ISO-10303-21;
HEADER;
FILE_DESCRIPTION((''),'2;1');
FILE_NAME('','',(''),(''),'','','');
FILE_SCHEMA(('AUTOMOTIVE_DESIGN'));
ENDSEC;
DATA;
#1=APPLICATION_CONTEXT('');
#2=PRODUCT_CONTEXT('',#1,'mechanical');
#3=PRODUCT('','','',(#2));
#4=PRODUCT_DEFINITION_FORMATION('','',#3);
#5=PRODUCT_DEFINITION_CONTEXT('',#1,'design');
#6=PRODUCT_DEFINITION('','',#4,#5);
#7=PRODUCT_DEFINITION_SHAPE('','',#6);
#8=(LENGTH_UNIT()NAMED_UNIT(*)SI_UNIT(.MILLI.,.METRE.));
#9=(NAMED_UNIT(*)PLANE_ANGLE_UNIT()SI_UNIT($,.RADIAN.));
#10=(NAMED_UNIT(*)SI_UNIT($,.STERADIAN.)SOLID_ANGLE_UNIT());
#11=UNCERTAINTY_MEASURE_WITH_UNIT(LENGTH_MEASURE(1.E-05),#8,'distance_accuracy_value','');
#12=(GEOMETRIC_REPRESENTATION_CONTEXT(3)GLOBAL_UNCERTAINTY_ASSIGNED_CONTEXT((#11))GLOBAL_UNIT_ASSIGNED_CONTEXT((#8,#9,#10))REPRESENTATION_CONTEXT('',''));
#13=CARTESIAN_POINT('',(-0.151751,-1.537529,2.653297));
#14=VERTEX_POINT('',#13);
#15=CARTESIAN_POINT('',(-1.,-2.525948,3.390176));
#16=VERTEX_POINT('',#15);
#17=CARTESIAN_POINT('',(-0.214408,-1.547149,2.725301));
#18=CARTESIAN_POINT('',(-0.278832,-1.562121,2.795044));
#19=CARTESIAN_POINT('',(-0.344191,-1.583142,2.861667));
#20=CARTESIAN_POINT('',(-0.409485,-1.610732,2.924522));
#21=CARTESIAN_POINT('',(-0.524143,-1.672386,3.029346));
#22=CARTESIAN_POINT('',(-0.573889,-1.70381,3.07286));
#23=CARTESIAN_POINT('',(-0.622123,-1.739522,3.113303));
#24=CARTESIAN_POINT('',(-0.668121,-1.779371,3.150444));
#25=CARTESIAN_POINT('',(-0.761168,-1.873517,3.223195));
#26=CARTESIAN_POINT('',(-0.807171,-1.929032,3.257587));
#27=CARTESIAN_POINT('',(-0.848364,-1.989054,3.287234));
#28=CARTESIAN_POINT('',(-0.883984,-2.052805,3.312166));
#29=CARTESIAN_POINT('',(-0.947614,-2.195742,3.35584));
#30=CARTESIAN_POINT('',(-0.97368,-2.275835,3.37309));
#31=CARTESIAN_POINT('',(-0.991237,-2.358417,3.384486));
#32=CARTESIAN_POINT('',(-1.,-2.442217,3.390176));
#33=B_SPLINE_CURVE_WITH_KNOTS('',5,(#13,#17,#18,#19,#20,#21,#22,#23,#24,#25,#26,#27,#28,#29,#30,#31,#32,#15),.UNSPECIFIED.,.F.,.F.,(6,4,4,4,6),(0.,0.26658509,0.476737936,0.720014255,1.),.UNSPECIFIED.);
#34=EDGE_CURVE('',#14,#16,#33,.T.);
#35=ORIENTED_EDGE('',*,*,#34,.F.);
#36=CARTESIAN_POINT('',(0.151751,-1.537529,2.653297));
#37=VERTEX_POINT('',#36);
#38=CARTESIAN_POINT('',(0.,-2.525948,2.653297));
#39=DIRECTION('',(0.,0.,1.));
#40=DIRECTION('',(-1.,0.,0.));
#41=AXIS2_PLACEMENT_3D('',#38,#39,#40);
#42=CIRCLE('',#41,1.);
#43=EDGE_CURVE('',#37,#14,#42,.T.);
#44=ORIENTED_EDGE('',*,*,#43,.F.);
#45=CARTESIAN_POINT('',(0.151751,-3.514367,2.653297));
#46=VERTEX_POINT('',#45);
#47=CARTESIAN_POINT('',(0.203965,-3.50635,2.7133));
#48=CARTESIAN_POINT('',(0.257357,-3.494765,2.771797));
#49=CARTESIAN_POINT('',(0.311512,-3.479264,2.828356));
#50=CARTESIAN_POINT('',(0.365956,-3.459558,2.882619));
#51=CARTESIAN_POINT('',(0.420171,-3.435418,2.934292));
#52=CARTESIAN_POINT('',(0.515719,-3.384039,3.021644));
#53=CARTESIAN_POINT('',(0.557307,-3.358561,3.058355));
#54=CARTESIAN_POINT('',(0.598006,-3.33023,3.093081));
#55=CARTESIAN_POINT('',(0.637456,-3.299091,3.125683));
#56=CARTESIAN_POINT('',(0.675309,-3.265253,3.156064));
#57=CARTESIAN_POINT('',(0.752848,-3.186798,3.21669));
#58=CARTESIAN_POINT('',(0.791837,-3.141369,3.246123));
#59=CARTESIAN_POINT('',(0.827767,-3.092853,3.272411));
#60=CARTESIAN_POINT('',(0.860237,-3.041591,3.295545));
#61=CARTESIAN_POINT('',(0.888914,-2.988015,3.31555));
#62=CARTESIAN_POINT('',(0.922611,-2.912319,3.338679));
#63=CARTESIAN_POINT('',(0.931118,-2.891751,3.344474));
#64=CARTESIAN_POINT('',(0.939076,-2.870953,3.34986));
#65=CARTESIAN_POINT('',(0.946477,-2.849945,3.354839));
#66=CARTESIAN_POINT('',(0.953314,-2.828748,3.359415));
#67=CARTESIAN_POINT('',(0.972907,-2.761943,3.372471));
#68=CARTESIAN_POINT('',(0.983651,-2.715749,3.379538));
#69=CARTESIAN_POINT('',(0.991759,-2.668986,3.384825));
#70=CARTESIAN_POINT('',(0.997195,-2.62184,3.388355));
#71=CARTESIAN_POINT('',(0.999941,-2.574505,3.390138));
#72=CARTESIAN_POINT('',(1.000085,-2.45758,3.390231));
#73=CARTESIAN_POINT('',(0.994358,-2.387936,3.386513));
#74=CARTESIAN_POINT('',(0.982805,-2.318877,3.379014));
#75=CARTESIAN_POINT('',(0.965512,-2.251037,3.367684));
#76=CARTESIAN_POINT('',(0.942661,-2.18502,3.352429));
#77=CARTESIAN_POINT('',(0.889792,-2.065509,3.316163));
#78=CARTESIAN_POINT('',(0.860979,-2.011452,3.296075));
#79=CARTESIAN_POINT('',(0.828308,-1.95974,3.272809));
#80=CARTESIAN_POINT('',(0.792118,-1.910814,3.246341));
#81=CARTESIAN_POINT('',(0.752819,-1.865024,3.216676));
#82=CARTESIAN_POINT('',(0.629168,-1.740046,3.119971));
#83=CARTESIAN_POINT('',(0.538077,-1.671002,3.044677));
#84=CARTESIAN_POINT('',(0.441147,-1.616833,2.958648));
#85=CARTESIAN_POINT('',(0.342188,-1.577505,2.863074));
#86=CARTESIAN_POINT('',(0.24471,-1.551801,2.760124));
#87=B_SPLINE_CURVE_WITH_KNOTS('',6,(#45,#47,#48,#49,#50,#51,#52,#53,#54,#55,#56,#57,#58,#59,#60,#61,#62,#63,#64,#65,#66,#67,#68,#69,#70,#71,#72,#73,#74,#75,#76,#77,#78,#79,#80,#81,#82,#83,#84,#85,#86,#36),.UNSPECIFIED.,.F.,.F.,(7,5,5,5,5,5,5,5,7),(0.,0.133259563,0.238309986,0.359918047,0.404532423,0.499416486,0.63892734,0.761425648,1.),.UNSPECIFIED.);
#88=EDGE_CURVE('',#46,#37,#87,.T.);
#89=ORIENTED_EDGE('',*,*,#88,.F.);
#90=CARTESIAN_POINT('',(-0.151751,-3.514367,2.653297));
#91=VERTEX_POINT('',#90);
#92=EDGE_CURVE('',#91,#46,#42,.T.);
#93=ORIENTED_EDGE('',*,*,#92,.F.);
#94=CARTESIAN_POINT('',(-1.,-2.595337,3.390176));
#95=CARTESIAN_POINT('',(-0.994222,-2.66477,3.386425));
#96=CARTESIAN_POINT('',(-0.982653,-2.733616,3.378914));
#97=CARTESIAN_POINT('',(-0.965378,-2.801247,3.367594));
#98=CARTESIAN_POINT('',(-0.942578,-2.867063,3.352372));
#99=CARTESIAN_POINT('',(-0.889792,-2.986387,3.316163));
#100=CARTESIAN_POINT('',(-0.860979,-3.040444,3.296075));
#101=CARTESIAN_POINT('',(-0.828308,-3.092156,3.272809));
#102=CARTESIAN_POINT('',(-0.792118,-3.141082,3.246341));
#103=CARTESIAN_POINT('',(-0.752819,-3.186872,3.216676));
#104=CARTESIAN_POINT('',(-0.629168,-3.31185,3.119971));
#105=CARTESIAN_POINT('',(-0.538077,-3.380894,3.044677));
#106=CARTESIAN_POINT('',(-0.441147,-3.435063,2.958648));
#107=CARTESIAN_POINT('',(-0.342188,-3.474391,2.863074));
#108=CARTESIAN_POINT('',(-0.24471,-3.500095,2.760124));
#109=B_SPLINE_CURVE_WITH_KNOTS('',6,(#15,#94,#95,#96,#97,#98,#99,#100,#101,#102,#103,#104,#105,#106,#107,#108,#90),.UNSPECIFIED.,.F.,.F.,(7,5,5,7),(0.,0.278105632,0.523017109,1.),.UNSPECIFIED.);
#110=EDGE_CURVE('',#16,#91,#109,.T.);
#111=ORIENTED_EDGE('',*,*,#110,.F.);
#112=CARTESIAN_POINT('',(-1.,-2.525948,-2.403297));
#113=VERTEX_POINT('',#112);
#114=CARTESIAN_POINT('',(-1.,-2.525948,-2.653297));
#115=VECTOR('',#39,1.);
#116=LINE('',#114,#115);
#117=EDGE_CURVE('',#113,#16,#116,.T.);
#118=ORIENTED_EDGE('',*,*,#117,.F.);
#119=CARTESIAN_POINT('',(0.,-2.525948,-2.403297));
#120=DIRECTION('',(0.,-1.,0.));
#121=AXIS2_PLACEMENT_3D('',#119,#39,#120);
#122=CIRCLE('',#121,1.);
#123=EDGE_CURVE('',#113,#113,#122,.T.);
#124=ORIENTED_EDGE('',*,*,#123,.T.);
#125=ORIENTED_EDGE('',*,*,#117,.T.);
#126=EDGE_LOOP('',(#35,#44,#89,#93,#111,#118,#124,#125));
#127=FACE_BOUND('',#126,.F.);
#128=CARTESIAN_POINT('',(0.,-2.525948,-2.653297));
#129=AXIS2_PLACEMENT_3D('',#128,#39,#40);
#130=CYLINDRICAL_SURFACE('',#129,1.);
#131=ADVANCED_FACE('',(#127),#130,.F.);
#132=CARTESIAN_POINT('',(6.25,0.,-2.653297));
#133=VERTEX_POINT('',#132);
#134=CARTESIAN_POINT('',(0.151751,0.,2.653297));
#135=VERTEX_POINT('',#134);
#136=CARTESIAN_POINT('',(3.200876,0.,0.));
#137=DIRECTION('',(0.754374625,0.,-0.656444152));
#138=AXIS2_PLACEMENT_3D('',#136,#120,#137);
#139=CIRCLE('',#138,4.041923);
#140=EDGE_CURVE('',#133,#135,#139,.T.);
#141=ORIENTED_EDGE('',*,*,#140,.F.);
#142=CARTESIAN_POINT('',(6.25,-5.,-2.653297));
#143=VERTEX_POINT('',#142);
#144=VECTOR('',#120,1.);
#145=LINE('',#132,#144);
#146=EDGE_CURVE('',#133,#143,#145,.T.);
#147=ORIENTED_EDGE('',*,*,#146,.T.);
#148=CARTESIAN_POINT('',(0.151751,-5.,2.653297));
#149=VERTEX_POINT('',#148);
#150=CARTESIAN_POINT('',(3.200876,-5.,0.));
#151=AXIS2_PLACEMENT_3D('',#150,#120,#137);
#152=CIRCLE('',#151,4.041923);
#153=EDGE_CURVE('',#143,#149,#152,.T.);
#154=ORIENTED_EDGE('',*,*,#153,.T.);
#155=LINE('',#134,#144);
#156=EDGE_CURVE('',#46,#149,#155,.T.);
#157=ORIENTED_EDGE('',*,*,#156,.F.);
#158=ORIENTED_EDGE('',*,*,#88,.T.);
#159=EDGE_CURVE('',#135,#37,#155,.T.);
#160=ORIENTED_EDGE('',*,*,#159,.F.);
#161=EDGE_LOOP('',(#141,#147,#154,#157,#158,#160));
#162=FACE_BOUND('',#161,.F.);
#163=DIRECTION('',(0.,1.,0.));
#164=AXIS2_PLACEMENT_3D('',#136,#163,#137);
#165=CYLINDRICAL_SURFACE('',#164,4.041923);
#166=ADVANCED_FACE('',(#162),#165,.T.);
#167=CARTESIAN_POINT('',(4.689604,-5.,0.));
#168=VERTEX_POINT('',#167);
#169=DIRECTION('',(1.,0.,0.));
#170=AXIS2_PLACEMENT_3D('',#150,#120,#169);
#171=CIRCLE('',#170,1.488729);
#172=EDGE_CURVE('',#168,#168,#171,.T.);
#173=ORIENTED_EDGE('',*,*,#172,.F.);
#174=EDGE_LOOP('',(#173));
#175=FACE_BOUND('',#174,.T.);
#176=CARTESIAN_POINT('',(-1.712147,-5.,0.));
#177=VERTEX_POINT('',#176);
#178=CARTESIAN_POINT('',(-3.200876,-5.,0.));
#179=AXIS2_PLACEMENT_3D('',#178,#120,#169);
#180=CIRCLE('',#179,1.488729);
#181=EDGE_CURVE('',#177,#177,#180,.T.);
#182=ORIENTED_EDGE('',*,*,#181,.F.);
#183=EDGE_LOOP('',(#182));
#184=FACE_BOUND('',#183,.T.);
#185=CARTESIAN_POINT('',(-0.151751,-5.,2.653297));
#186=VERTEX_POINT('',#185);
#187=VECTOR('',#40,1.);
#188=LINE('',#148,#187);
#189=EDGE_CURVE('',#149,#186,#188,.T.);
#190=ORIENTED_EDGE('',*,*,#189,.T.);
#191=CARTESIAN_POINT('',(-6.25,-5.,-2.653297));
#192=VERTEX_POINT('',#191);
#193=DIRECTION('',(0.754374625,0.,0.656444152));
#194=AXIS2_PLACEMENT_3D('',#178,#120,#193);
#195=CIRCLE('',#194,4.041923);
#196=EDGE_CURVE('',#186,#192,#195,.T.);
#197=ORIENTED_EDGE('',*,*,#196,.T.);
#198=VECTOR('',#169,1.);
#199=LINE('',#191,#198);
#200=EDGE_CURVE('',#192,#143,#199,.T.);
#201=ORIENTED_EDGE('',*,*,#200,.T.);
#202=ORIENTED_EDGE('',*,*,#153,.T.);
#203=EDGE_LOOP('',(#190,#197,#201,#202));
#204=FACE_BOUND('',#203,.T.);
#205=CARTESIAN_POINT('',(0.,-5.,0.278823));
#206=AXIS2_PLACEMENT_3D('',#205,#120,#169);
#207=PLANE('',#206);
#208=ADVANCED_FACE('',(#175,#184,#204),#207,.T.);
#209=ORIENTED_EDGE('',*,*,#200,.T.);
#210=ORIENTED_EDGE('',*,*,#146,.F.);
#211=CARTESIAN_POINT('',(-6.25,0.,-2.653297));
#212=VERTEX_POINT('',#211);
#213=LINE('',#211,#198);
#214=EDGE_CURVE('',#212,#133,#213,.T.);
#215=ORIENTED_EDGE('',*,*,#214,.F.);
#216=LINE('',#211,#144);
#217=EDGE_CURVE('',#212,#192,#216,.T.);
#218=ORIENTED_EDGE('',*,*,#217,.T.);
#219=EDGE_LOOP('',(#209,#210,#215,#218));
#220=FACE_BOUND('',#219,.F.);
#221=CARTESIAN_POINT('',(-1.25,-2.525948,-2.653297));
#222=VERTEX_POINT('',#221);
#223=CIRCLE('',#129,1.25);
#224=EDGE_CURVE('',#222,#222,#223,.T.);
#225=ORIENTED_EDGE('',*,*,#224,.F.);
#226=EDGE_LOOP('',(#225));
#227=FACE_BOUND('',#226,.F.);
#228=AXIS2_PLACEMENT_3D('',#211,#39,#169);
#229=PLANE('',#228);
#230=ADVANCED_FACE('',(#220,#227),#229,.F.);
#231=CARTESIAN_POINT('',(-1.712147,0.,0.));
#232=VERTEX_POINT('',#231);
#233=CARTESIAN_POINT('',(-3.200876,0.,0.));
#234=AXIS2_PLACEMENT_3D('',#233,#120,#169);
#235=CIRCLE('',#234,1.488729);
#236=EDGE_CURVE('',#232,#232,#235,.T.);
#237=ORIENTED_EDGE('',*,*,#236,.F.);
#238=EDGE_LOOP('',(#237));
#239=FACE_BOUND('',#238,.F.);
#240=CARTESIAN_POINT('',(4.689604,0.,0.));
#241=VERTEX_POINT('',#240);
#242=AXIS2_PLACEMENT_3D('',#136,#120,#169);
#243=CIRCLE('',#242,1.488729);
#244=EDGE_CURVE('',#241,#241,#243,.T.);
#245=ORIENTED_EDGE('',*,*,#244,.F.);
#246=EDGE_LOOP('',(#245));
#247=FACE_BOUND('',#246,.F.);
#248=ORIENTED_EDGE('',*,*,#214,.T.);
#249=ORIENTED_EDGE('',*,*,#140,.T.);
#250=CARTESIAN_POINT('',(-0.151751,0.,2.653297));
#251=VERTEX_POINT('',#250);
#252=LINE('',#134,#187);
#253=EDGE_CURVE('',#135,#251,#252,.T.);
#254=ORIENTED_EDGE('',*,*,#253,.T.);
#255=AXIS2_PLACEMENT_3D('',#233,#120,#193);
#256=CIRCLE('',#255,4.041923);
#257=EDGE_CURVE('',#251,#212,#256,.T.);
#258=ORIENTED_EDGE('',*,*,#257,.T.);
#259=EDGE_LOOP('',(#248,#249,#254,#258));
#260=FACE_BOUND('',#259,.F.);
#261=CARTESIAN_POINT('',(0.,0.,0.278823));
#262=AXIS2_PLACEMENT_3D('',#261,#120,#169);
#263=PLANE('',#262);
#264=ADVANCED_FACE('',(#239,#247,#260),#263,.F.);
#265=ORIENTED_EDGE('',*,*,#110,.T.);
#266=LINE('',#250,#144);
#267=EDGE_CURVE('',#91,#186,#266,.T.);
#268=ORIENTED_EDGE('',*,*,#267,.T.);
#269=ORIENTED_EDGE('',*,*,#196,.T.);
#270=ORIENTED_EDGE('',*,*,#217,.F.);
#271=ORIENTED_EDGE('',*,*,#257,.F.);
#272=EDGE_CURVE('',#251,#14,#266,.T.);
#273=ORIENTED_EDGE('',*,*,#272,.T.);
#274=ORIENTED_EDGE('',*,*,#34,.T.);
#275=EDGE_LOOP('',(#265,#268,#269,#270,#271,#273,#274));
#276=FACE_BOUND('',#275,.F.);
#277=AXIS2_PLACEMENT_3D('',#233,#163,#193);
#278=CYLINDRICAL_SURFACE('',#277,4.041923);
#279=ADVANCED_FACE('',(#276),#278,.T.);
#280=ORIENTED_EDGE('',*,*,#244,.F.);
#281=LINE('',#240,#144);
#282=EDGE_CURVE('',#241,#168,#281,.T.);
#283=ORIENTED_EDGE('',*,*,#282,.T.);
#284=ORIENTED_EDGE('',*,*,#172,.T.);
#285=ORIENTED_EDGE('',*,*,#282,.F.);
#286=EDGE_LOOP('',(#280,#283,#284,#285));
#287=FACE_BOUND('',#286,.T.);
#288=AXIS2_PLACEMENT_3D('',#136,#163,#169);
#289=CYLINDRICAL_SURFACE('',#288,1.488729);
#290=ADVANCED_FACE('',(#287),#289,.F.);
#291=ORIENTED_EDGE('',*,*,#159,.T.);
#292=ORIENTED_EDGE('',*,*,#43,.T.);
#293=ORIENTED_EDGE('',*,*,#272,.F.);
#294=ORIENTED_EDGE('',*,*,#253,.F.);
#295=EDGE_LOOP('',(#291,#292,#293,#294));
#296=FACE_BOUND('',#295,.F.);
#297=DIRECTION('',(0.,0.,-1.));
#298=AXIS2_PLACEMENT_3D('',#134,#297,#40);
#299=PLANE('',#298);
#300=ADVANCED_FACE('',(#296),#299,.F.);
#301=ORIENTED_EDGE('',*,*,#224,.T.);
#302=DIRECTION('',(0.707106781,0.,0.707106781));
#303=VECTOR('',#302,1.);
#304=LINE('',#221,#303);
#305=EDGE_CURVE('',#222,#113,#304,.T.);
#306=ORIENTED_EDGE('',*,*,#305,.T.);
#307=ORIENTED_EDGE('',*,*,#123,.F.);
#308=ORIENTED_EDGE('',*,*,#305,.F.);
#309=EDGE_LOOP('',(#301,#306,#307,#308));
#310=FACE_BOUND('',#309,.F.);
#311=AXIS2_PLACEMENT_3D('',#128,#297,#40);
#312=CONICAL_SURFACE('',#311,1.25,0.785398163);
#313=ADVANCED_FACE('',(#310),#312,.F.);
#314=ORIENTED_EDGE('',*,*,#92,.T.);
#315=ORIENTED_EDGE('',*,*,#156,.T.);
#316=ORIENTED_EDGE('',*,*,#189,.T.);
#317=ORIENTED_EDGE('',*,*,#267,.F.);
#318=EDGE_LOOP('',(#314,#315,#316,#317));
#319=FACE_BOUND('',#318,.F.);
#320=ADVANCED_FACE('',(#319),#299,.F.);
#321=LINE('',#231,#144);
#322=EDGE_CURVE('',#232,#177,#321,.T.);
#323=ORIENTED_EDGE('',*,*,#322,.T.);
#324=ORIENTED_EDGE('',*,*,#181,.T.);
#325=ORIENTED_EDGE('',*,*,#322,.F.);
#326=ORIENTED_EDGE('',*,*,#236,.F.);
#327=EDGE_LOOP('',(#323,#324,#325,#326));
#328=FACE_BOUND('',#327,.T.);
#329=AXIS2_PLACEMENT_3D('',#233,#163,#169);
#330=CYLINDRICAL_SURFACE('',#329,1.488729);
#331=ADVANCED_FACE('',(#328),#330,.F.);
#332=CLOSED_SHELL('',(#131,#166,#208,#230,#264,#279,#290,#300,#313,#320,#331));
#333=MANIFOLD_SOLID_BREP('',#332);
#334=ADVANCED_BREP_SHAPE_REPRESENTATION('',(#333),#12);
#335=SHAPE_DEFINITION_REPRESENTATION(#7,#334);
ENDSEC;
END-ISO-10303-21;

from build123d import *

# Parameters (mm, degrees)
F0_R           = 1.488728542
F1_DEPTH       = 5
F5_D           = 2
F5_CSINK_D     = 2.5
F5_CSINK_ANGLE = 90


# Not quite as in the source:
# - a feature of the source that left no trace in its solid (it failed there, or was rolled back) is left out


with BuildPart() as f1:
    # F0 (on Front) → F1 (new body)
    with BuildSketch(Plane.XZ):
        with BuildLine():
            Line((-6.25, -2.6532969418), (6.25, -2.6532969418))
            ThreePointArc((6.25, -2.6532969418), (5.854172537, 3.0491244048), (0.1517511904, 2.6532969418))
            Line((0.1517511904, 2.6532969418), (-0.1517511904, 2.6532969418))
            ThreePointArc((-0.1517511904, 2.6532969418), (-5.854172537, 3.0491244048), (-6.25, -2.6532969418))
        make_face()
        with Locations((-3.2008755952, 0)):
            Circle(F0_R, mode=Mode.SUBTRACT)
        with Locations((3.2008755952, 0)):
            Circle(F0_R, mode=Mode.SUBTRACT)
    extrude(amount=F1_DEPTH)

    # F5 (through all)
    with Locations(Plane(origin=(0, 0, -2.6532969418), x_dir=(1, 0, 0), z_dir=(0, 0, -1))):
        with Locations((0, 2.525947988)):
            CounterSinkHole(F5_D / 2, F5_CSINK_D / 2, counter_sink_angle=F5_CSINK_ANGLE)


solid = f1.part
